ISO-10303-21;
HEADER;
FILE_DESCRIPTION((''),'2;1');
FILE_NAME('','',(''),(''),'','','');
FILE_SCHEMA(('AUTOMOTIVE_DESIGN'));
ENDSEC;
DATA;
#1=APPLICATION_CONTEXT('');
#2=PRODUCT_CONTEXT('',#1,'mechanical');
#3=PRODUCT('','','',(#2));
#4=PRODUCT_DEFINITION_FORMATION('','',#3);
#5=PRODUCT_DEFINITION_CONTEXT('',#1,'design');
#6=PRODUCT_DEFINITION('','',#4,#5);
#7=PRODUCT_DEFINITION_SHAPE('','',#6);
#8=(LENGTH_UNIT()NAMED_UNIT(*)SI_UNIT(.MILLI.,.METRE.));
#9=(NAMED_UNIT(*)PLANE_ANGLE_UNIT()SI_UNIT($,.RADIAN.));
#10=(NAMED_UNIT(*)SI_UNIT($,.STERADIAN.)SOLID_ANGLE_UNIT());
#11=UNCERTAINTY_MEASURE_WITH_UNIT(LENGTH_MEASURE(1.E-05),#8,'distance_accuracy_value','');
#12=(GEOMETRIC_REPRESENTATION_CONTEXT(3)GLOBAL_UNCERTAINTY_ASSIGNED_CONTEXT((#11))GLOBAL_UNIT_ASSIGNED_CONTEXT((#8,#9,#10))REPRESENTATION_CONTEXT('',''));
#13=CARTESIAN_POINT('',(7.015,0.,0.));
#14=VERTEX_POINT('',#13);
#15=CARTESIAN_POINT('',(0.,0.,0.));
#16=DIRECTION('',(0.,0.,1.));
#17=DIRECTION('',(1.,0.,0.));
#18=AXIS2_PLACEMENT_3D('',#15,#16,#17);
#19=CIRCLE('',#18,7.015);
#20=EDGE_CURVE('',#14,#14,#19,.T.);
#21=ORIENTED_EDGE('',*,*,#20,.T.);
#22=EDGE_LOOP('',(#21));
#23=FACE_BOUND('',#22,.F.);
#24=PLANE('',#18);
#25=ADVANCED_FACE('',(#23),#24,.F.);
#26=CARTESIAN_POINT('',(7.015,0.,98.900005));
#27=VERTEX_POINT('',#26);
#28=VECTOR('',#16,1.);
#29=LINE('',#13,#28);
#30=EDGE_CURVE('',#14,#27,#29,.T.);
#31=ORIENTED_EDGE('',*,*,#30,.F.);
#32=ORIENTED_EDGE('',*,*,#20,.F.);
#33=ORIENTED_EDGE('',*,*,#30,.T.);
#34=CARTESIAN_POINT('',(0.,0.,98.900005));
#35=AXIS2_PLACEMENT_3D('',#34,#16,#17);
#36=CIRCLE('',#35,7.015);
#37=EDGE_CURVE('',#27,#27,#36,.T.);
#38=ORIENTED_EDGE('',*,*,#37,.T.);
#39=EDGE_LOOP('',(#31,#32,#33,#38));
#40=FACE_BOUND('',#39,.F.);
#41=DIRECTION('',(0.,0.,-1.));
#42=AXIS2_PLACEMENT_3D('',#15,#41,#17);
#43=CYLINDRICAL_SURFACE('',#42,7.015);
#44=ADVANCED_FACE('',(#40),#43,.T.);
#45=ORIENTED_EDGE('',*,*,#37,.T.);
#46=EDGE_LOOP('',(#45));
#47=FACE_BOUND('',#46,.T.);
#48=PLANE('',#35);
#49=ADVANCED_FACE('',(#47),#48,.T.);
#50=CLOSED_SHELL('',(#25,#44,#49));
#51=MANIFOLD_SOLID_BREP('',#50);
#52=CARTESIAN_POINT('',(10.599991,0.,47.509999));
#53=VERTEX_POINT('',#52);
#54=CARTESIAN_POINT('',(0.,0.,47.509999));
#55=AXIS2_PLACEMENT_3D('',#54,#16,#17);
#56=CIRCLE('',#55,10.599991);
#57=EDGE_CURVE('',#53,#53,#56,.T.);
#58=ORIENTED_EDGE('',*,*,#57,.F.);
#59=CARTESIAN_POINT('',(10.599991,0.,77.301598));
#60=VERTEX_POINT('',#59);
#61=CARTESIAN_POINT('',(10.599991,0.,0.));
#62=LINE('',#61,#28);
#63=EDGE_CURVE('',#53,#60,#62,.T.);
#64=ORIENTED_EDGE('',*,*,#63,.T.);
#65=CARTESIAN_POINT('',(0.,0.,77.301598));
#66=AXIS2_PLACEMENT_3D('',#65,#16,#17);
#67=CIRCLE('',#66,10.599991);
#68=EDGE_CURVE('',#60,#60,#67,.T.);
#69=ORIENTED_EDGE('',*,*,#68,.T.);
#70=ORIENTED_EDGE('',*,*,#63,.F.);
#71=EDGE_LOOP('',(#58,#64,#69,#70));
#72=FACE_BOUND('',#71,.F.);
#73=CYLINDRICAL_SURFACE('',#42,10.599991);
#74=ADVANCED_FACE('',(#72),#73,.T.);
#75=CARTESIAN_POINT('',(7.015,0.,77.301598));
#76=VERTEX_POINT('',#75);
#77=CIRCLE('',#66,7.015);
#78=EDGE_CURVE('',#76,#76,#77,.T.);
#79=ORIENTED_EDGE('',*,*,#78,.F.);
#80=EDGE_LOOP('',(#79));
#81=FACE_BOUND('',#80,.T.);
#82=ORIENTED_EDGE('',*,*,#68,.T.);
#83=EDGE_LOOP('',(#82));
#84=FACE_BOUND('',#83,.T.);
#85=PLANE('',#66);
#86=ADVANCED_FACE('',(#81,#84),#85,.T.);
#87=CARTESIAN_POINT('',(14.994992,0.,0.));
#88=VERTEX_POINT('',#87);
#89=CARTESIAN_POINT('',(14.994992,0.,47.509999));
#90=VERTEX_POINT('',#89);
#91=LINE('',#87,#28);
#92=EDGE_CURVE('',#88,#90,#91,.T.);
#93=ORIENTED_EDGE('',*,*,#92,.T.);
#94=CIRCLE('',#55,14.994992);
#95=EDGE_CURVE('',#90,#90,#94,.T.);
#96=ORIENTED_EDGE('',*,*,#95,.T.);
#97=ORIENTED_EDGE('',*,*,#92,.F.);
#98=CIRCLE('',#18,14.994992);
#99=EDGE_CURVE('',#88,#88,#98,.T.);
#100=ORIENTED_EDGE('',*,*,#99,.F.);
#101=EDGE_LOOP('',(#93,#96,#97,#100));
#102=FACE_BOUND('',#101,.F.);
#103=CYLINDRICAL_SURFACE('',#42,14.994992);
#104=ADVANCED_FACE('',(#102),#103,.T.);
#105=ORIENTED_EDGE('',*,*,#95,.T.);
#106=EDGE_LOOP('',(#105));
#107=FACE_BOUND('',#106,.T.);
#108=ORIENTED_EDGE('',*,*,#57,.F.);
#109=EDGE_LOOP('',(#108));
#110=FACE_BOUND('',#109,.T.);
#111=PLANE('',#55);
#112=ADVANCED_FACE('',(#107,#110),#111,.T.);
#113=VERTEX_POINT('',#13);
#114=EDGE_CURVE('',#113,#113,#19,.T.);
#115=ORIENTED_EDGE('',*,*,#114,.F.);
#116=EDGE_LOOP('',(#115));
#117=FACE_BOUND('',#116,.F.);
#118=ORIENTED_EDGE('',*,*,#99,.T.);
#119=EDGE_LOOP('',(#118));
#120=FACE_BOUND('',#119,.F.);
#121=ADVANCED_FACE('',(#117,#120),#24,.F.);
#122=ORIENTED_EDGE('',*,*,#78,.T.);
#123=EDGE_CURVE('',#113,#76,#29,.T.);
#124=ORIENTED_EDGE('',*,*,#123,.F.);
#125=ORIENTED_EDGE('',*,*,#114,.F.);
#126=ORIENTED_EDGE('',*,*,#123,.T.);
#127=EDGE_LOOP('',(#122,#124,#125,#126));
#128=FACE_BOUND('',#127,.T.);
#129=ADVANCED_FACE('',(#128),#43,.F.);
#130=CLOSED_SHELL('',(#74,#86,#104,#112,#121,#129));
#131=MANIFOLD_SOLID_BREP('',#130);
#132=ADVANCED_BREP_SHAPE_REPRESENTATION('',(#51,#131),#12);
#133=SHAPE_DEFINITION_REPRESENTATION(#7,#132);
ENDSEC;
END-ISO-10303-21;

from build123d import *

# Parameters (mm, degrees)
F0_R     = 14.9949916
F0_R_2   = 10.5999915
F1_DEPTH = 47.50999896
F0_R_3   = 7.01499994
F2_DEPTH = 98.9000054
F3_DEPTH = 77.301598


with BuildPart() as f1:
    # F0 (on Top) → F1 (new body)
    with BuildSketch(Plane.XY):
        Circle(F0_R)
        Circle(F0_R_2, mode=Mode.SUBTRACT)
    extrude(amount=F1_DEPTH)

    # F0 (on Top) → F3 (join)
    with BuildSketch(Plane.XY):
        Circle(F0_R_2)
        Circle(F0_R_3, mode=Mode.SUBTRACT)
    extrude(amount=F3_DEPTH)


with BuildPart() as f2:
    # F0 (on Top) → F2 (new body)
    with BuildSketch(Plane.XY):
        Circle(F0_R_3)
    extrude(amount=F2_DEPTH)


solid = Compound([f1.part, f2.part])
